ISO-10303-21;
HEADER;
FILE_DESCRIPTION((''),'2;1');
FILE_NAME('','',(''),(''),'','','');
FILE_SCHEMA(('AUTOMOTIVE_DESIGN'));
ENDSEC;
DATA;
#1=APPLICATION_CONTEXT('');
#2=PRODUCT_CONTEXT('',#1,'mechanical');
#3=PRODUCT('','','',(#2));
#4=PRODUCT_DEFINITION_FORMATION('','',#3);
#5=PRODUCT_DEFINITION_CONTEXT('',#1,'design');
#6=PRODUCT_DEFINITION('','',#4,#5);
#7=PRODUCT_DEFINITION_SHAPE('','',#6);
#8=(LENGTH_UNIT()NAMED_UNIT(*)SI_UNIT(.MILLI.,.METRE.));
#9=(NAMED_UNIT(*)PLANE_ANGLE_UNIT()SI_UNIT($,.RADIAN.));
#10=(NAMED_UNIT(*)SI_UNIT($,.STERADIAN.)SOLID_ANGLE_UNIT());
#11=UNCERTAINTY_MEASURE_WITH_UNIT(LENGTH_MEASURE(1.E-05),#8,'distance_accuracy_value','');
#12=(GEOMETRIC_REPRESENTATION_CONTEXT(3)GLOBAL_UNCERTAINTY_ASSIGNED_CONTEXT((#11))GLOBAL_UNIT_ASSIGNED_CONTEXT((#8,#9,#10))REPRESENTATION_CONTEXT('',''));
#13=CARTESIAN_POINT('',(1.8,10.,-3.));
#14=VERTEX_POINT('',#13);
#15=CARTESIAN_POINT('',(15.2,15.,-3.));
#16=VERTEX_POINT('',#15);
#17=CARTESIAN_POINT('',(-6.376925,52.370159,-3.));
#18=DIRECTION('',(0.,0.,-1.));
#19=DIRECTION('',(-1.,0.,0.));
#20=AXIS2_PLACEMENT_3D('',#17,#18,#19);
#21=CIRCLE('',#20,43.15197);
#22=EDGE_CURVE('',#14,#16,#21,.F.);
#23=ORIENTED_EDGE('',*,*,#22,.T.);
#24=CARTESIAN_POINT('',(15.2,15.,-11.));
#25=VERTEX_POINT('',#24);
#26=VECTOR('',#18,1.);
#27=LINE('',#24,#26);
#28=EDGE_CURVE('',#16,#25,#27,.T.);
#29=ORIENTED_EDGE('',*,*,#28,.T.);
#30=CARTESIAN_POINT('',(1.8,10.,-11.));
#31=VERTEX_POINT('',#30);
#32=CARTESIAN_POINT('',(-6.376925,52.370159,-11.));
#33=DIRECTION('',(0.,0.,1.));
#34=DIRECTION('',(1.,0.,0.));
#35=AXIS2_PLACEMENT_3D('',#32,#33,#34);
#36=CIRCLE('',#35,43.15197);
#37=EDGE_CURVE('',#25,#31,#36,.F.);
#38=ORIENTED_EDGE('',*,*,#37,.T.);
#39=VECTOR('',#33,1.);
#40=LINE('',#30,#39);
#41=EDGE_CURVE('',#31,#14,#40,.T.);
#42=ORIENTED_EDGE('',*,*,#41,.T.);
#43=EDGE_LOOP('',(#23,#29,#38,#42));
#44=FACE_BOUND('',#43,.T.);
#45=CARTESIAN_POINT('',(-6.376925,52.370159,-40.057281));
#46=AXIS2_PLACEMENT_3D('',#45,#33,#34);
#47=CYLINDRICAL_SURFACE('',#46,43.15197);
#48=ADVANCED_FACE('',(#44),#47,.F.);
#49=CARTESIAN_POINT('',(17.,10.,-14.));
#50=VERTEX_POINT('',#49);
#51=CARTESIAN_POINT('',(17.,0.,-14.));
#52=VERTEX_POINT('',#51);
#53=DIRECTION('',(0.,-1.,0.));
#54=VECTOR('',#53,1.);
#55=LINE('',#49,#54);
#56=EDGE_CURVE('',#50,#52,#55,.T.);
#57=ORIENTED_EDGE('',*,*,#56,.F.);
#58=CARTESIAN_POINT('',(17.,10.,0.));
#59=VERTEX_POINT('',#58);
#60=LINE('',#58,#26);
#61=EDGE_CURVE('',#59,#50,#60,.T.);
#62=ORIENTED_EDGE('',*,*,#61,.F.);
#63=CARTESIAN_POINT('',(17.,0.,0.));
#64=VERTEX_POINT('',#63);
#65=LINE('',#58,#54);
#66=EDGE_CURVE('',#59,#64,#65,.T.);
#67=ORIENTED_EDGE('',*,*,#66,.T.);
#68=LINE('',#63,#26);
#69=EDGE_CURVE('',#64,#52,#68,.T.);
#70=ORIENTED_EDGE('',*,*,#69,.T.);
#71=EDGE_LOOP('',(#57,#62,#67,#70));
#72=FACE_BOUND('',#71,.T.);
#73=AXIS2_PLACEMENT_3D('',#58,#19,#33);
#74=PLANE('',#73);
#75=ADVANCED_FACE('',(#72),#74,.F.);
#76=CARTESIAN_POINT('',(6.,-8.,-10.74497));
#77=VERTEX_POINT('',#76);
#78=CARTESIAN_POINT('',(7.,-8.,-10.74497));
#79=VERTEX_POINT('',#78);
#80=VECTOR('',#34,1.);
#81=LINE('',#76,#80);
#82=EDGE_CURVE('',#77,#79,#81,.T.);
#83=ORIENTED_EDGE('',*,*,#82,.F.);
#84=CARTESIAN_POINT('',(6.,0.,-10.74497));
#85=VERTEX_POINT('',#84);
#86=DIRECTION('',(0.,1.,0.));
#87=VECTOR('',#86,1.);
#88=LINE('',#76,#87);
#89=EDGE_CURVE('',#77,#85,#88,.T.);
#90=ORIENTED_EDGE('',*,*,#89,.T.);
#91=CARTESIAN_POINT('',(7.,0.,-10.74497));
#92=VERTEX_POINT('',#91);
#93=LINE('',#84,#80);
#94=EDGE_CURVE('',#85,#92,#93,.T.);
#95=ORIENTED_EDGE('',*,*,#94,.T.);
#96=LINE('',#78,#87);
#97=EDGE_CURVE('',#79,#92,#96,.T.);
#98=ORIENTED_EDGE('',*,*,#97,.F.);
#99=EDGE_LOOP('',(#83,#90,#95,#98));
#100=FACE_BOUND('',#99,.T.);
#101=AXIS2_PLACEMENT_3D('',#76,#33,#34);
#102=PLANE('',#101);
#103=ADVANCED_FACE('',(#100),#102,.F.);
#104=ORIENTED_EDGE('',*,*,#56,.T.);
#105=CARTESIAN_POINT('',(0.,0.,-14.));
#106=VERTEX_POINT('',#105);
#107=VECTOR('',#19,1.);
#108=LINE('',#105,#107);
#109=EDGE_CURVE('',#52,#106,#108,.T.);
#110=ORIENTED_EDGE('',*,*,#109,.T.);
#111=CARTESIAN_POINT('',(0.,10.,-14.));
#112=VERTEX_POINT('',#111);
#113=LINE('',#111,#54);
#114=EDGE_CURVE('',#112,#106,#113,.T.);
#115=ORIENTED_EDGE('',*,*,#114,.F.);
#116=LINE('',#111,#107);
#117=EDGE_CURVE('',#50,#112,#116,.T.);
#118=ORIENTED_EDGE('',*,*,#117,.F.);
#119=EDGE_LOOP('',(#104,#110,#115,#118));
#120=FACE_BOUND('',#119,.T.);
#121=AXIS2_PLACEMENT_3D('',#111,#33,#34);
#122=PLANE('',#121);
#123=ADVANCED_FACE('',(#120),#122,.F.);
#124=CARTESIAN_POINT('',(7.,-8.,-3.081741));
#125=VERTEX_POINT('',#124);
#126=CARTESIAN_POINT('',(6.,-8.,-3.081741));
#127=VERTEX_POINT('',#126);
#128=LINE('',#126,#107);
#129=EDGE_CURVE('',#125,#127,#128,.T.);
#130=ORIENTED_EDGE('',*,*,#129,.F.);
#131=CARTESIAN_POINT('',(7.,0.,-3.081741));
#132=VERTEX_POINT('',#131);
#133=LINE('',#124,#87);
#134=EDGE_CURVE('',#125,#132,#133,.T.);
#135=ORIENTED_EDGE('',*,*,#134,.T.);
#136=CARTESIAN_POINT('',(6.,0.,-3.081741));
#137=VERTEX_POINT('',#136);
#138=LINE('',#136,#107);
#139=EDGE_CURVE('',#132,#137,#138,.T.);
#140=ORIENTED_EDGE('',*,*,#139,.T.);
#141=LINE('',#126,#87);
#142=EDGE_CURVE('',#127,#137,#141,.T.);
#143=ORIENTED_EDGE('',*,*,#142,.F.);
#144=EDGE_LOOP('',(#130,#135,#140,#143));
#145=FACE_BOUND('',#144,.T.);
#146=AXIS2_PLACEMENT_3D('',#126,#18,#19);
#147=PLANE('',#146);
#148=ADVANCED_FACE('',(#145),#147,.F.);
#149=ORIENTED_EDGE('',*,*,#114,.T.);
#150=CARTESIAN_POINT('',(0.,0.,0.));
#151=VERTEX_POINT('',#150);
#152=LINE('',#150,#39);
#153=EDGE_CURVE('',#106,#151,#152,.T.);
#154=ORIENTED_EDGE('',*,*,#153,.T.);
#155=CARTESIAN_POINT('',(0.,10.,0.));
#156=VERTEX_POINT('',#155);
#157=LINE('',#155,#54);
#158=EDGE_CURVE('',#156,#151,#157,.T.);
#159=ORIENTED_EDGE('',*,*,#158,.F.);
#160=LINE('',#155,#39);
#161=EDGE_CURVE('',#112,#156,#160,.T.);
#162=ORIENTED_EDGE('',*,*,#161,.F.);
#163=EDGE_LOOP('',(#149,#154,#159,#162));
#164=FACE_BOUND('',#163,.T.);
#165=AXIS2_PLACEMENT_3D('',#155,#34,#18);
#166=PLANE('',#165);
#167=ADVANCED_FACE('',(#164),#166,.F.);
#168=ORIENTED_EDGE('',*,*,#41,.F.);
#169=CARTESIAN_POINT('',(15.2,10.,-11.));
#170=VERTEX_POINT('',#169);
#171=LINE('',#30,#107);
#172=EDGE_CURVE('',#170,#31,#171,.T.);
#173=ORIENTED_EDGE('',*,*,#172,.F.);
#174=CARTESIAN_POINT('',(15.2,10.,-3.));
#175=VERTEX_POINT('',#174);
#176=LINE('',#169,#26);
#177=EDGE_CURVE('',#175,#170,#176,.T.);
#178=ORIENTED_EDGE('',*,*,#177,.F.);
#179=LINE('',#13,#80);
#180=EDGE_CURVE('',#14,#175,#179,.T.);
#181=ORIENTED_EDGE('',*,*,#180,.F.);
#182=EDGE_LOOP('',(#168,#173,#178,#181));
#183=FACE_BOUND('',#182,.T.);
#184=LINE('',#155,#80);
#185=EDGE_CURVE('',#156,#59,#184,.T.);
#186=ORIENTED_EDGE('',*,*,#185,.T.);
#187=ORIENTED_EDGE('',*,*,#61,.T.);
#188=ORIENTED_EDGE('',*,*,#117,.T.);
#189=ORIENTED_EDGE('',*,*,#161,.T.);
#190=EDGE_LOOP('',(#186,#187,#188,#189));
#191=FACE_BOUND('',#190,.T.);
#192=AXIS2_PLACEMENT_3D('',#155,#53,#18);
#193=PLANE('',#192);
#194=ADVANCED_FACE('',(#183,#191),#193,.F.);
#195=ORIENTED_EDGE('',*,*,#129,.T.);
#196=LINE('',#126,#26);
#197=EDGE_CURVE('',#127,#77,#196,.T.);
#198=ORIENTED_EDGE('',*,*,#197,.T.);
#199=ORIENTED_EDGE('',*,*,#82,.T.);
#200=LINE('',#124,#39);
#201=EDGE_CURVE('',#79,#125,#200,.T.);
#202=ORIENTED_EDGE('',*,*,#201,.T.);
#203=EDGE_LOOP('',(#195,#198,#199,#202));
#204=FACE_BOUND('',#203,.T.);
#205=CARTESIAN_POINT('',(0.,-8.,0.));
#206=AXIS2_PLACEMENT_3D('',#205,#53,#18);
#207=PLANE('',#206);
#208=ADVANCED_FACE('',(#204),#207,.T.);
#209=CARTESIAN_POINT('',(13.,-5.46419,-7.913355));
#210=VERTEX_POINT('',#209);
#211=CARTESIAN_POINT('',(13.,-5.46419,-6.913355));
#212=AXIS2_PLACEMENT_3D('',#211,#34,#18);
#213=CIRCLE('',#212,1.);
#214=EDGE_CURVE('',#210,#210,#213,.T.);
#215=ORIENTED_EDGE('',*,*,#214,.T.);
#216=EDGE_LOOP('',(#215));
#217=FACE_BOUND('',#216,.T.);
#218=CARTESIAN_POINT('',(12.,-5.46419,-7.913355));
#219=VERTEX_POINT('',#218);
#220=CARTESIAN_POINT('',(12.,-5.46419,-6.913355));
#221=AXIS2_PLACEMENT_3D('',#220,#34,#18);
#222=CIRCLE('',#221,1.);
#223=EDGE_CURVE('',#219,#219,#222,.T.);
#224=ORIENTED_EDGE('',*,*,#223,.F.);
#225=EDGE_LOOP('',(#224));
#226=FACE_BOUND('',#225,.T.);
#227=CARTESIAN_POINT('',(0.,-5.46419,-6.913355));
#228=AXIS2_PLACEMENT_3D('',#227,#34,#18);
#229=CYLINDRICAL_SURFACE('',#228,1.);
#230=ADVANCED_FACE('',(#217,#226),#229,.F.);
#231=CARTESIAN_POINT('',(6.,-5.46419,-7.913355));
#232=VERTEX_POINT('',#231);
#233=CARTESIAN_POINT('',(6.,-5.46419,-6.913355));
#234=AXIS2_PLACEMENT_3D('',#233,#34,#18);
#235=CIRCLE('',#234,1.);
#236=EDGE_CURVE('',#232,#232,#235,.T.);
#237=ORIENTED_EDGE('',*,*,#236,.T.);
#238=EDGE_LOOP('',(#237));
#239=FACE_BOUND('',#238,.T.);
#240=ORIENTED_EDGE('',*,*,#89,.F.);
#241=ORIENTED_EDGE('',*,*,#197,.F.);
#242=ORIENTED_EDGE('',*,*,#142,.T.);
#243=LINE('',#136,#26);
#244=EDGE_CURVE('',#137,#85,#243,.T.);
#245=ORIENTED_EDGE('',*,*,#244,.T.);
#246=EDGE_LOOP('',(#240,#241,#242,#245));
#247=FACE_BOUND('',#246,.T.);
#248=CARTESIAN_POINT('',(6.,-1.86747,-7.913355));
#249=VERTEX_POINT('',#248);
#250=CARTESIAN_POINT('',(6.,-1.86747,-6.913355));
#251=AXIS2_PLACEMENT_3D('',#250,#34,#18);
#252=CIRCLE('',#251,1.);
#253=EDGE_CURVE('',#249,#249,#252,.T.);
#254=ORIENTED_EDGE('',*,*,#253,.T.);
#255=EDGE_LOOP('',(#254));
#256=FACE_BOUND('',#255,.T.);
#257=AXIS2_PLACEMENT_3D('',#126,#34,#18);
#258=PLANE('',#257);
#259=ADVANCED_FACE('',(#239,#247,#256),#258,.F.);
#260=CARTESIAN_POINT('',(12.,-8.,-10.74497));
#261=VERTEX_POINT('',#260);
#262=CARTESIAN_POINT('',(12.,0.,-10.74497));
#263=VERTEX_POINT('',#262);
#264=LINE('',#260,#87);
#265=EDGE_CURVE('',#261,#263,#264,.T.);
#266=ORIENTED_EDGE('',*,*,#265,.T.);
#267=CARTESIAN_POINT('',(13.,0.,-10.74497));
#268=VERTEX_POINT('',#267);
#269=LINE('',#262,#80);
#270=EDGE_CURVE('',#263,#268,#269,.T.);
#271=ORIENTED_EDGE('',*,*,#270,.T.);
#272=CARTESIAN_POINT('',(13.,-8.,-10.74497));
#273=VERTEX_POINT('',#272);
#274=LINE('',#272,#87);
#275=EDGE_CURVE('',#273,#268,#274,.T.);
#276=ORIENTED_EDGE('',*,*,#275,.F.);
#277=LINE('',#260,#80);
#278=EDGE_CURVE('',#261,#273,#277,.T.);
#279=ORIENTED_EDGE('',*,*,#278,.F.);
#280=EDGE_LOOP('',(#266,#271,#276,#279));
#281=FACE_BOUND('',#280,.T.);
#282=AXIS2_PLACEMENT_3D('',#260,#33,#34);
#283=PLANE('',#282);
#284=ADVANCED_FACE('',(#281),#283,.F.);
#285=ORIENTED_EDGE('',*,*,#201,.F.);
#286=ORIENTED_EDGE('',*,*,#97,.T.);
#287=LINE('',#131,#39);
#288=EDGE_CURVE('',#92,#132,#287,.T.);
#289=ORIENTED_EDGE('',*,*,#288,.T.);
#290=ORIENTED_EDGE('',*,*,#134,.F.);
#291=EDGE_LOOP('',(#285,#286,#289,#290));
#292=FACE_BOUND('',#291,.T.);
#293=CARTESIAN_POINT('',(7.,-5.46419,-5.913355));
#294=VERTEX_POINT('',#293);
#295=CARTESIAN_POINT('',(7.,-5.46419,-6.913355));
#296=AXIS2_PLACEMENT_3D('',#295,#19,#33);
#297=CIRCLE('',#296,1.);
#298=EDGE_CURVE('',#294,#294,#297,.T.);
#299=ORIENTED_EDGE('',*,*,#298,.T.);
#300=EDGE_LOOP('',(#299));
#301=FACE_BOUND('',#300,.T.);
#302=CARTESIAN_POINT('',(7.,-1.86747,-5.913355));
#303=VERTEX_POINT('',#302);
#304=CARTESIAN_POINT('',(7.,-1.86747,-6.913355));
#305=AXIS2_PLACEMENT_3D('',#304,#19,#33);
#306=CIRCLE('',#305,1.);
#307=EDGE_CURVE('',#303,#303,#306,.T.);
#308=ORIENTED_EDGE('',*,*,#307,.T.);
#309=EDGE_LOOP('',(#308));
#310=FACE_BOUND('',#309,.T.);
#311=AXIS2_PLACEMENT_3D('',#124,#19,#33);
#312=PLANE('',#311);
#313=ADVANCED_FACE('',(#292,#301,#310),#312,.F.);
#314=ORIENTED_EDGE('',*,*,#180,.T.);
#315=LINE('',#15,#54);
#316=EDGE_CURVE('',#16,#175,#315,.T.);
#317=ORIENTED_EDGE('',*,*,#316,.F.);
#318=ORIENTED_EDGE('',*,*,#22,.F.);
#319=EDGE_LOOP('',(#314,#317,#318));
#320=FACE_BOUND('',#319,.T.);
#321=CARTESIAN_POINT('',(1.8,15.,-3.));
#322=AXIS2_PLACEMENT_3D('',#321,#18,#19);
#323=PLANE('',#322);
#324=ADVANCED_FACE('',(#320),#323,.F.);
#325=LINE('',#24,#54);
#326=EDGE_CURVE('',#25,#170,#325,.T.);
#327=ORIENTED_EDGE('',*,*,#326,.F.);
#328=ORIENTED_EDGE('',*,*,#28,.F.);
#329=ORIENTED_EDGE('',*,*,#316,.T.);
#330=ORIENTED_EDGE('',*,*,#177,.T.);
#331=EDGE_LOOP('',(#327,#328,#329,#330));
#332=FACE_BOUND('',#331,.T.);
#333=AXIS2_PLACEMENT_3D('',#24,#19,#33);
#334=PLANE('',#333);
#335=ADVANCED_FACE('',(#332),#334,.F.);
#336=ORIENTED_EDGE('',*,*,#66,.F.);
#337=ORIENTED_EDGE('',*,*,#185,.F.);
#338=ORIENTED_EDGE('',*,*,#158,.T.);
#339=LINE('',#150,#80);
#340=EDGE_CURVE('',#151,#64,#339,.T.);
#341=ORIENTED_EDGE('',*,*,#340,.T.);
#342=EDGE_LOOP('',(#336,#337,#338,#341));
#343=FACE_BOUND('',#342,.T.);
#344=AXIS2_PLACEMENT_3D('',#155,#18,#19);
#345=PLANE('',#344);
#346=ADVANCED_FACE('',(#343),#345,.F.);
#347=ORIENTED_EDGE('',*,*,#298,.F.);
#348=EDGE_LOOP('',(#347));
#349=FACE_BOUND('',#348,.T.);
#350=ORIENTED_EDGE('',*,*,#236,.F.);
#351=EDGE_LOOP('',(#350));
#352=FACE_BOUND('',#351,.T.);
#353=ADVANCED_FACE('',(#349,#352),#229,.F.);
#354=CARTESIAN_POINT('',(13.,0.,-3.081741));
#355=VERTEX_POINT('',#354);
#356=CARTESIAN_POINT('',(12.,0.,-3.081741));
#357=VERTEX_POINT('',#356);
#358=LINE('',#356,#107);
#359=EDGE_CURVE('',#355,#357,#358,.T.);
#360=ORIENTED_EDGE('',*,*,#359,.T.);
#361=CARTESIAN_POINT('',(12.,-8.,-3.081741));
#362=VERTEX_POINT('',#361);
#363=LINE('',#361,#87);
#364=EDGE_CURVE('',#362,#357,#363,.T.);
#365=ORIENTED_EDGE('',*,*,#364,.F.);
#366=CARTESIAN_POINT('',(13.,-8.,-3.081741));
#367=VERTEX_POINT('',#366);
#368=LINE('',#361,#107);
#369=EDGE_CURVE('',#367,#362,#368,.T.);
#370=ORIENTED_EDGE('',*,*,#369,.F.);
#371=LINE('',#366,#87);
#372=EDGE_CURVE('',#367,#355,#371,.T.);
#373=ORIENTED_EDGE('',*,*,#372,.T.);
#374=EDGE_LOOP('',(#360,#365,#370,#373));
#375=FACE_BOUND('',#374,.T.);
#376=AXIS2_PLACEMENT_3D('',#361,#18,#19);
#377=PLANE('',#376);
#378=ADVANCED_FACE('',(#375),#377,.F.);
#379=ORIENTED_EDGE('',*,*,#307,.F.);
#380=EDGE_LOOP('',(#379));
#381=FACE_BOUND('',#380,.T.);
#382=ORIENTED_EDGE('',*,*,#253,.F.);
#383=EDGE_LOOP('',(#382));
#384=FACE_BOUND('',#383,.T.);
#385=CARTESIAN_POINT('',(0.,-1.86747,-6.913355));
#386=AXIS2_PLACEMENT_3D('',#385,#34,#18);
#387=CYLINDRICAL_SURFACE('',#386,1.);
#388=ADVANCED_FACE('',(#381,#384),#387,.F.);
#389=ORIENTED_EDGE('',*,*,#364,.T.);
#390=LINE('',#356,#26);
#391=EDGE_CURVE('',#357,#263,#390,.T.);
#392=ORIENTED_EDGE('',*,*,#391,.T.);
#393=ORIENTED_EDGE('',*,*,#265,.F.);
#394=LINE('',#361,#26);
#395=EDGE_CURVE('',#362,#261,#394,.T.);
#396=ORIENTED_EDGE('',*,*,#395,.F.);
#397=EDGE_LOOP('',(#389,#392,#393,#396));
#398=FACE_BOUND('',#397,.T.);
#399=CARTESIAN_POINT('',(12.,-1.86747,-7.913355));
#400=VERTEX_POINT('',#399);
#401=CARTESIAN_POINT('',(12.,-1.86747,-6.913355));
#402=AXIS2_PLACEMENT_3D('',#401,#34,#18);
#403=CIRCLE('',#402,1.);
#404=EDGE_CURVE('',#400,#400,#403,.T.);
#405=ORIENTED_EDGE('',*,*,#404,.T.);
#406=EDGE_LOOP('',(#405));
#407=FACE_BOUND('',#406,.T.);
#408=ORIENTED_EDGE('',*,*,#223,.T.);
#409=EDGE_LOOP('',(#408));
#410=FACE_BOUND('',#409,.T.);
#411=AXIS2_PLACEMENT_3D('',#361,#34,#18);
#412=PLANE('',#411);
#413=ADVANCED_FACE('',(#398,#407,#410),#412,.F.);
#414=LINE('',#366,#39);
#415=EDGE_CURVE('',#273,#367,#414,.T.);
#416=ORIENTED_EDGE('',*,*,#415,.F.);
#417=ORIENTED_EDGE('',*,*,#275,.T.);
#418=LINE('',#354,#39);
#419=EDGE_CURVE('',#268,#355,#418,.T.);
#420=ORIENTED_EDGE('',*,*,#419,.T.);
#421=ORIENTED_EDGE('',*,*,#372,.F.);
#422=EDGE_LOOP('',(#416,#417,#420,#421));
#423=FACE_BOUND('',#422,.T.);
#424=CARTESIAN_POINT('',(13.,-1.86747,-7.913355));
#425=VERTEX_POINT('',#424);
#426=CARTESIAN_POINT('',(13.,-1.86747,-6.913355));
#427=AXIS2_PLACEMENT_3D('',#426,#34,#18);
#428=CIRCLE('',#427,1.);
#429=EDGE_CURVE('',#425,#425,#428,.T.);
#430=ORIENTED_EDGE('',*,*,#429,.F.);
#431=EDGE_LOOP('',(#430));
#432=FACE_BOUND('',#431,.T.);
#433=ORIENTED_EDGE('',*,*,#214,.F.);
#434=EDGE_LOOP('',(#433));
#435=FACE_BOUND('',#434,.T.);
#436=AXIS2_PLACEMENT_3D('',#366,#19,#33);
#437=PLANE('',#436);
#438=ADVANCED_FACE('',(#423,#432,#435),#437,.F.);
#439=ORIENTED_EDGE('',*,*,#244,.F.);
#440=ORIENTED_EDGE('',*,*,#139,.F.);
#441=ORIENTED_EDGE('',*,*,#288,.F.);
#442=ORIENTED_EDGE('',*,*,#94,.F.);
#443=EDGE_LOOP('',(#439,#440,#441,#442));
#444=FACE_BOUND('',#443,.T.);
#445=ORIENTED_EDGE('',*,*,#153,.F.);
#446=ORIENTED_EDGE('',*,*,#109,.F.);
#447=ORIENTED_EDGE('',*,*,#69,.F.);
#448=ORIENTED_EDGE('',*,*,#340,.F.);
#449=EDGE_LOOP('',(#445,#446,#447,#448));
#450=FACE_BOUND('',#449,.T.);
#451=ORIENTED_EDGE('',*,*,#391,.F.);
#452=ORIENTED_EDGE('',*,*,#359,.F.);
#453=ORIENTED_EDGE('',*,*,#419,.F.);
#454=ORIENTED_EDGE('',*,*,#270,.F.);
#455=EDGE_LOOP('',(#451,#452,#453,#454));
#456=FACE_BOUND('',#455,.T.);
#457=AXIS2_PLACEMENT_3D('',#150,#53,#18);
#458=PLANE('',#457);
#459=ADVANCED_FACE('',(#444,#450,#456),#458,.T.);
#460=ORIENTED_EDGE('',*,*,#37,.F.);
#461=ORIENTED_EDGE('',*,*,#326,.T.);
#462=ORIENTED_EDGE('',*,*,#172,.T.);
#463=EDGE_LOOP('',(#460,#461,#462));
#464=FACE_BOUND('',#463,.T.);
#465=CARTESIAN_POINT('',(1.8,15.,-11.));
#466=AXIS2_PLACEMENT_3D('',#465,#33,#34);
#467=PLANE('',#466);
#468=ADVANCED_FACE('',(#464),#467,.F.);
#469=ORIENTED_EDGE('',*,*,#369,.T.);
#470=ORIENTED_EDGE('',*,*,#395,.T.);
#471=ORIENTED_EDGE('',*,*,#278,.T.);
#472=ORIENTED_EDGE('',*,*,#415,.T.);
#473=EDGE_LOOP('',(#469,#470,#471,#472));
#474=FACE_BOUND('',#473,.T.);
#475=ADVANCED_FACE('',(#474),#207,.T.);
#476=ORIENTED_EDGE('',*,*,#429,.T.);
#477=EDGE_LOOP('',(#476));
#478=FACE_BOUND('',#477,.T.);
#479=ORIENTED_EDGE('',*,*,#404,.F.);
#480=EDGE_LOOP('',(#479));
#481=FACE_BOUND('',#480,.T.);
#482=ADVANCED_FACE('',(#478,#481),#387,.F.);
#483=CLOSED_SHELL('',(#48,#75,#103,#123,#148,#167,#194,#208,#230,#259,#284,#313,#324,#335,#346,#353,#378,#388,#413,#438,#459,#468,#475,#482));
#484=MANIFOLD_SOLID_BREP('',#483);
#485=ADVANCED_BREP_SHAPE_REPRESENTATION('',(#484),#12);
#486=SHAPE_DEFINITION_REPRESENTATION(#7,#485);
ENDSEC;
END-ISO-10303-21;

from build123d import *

# Parameters (mm, degrees)
SKETCH1_W           = 17
SKETCH1_H           = 14
BOSS_EXTRUDE1_DEPTH = 10
SKETCH2_W           = 13.4
SKETCH2_H           = 8
BOSS_EXTRUDE2_DEPTH = 5
CUT_EXTRUDE4_START  = -8
CUT_EXTRUDE4_DEPTH  = 8
SKETCH4_W           = 1
SKETCH4_H           = 7.663229465
BOSS_EXTRUDE3_DEPTH = 8
SKETCH5_R           = 1
CUT_EXTRUDE5_DEPTH  = 25.289915603


# Read off the part's stored shape, not the designer's step: Cut-Extrude4
with BuildPart() as part:
    # Sketch1 → Boss-Extrude1 (new body)
    with BuildSketch(Plane(origin=(0, 0, 0), x_dir=(1, 0, 0), z_dir=(0, 1, 0))):
        with Locations((8.5, 7)):
            Rectangle(SKETCH1_W, SKETCH1_H)
    extrude(amount=BOSS_EXTRUDE1_DEPTH)

    # Sketch2 → Boss-Extrude2 (add)
    with BuildSketch(Plane(origin=(0, 10, 0), x_dir=(1, 0, 0), z_dir=(0, 1, 0))):
        with Locations((8.5, 7)):
            Rectangle(SKETCH2_W, SKETCH2_H)
    extrude(amount=BOSS_EXTRUDE2_DEPTH)

    # Cut-Extrude4 outline → Cut-Extrude4 (cut)
    with BuildSketch(Plane.XY.offset(-3).offset(CUT_EXTRUDE4_START)):
        with BuildLine():
            Line((1.8, 15), (1.8, 10))
            ThreePointArc((1.8, 10), (8.708594461, 11.940966845), (15.2, 15))
            Line((15.2, 15), (1.8, 15))
        make_face()
    extrude(amount=CUT_EXTRUDE4_DEPTH, mode=Mode.SUBTRACT)

    # Sketch4 → Boss-Extrude3 (add)
    with BuildSketch(Plane.XZ):
        with Locations((6.5, -6.913355446)):
            Rectangle(SKETCH4_W, SKETCH4_H)
        with Locations((12.5, -6.913355446)):
            Rectangle(SKETCH4_W, SKETCH4_H)
    extrude(amount=BOSS_EXTRUDE3_DEPTH)

    # Sketch5 → Cut-Extrude5 (cut, through all)
    with BuildSketch(Plane(origin=(13, 0, 0), x_dir=(0, 0, -1), z_dir=(1, 0, 0))):
        with Locations((6.913355446, -1.867470442)):
            Circle(SKETCH5_R)
        with Locations((6.913355446, -5.464189838)):
            Circle(SKETCH5_R)
    extrude(amount=-CUT_EXTRUDE5_DEPTH, mode=Mode.SUBTRACT)


solid = part.part
